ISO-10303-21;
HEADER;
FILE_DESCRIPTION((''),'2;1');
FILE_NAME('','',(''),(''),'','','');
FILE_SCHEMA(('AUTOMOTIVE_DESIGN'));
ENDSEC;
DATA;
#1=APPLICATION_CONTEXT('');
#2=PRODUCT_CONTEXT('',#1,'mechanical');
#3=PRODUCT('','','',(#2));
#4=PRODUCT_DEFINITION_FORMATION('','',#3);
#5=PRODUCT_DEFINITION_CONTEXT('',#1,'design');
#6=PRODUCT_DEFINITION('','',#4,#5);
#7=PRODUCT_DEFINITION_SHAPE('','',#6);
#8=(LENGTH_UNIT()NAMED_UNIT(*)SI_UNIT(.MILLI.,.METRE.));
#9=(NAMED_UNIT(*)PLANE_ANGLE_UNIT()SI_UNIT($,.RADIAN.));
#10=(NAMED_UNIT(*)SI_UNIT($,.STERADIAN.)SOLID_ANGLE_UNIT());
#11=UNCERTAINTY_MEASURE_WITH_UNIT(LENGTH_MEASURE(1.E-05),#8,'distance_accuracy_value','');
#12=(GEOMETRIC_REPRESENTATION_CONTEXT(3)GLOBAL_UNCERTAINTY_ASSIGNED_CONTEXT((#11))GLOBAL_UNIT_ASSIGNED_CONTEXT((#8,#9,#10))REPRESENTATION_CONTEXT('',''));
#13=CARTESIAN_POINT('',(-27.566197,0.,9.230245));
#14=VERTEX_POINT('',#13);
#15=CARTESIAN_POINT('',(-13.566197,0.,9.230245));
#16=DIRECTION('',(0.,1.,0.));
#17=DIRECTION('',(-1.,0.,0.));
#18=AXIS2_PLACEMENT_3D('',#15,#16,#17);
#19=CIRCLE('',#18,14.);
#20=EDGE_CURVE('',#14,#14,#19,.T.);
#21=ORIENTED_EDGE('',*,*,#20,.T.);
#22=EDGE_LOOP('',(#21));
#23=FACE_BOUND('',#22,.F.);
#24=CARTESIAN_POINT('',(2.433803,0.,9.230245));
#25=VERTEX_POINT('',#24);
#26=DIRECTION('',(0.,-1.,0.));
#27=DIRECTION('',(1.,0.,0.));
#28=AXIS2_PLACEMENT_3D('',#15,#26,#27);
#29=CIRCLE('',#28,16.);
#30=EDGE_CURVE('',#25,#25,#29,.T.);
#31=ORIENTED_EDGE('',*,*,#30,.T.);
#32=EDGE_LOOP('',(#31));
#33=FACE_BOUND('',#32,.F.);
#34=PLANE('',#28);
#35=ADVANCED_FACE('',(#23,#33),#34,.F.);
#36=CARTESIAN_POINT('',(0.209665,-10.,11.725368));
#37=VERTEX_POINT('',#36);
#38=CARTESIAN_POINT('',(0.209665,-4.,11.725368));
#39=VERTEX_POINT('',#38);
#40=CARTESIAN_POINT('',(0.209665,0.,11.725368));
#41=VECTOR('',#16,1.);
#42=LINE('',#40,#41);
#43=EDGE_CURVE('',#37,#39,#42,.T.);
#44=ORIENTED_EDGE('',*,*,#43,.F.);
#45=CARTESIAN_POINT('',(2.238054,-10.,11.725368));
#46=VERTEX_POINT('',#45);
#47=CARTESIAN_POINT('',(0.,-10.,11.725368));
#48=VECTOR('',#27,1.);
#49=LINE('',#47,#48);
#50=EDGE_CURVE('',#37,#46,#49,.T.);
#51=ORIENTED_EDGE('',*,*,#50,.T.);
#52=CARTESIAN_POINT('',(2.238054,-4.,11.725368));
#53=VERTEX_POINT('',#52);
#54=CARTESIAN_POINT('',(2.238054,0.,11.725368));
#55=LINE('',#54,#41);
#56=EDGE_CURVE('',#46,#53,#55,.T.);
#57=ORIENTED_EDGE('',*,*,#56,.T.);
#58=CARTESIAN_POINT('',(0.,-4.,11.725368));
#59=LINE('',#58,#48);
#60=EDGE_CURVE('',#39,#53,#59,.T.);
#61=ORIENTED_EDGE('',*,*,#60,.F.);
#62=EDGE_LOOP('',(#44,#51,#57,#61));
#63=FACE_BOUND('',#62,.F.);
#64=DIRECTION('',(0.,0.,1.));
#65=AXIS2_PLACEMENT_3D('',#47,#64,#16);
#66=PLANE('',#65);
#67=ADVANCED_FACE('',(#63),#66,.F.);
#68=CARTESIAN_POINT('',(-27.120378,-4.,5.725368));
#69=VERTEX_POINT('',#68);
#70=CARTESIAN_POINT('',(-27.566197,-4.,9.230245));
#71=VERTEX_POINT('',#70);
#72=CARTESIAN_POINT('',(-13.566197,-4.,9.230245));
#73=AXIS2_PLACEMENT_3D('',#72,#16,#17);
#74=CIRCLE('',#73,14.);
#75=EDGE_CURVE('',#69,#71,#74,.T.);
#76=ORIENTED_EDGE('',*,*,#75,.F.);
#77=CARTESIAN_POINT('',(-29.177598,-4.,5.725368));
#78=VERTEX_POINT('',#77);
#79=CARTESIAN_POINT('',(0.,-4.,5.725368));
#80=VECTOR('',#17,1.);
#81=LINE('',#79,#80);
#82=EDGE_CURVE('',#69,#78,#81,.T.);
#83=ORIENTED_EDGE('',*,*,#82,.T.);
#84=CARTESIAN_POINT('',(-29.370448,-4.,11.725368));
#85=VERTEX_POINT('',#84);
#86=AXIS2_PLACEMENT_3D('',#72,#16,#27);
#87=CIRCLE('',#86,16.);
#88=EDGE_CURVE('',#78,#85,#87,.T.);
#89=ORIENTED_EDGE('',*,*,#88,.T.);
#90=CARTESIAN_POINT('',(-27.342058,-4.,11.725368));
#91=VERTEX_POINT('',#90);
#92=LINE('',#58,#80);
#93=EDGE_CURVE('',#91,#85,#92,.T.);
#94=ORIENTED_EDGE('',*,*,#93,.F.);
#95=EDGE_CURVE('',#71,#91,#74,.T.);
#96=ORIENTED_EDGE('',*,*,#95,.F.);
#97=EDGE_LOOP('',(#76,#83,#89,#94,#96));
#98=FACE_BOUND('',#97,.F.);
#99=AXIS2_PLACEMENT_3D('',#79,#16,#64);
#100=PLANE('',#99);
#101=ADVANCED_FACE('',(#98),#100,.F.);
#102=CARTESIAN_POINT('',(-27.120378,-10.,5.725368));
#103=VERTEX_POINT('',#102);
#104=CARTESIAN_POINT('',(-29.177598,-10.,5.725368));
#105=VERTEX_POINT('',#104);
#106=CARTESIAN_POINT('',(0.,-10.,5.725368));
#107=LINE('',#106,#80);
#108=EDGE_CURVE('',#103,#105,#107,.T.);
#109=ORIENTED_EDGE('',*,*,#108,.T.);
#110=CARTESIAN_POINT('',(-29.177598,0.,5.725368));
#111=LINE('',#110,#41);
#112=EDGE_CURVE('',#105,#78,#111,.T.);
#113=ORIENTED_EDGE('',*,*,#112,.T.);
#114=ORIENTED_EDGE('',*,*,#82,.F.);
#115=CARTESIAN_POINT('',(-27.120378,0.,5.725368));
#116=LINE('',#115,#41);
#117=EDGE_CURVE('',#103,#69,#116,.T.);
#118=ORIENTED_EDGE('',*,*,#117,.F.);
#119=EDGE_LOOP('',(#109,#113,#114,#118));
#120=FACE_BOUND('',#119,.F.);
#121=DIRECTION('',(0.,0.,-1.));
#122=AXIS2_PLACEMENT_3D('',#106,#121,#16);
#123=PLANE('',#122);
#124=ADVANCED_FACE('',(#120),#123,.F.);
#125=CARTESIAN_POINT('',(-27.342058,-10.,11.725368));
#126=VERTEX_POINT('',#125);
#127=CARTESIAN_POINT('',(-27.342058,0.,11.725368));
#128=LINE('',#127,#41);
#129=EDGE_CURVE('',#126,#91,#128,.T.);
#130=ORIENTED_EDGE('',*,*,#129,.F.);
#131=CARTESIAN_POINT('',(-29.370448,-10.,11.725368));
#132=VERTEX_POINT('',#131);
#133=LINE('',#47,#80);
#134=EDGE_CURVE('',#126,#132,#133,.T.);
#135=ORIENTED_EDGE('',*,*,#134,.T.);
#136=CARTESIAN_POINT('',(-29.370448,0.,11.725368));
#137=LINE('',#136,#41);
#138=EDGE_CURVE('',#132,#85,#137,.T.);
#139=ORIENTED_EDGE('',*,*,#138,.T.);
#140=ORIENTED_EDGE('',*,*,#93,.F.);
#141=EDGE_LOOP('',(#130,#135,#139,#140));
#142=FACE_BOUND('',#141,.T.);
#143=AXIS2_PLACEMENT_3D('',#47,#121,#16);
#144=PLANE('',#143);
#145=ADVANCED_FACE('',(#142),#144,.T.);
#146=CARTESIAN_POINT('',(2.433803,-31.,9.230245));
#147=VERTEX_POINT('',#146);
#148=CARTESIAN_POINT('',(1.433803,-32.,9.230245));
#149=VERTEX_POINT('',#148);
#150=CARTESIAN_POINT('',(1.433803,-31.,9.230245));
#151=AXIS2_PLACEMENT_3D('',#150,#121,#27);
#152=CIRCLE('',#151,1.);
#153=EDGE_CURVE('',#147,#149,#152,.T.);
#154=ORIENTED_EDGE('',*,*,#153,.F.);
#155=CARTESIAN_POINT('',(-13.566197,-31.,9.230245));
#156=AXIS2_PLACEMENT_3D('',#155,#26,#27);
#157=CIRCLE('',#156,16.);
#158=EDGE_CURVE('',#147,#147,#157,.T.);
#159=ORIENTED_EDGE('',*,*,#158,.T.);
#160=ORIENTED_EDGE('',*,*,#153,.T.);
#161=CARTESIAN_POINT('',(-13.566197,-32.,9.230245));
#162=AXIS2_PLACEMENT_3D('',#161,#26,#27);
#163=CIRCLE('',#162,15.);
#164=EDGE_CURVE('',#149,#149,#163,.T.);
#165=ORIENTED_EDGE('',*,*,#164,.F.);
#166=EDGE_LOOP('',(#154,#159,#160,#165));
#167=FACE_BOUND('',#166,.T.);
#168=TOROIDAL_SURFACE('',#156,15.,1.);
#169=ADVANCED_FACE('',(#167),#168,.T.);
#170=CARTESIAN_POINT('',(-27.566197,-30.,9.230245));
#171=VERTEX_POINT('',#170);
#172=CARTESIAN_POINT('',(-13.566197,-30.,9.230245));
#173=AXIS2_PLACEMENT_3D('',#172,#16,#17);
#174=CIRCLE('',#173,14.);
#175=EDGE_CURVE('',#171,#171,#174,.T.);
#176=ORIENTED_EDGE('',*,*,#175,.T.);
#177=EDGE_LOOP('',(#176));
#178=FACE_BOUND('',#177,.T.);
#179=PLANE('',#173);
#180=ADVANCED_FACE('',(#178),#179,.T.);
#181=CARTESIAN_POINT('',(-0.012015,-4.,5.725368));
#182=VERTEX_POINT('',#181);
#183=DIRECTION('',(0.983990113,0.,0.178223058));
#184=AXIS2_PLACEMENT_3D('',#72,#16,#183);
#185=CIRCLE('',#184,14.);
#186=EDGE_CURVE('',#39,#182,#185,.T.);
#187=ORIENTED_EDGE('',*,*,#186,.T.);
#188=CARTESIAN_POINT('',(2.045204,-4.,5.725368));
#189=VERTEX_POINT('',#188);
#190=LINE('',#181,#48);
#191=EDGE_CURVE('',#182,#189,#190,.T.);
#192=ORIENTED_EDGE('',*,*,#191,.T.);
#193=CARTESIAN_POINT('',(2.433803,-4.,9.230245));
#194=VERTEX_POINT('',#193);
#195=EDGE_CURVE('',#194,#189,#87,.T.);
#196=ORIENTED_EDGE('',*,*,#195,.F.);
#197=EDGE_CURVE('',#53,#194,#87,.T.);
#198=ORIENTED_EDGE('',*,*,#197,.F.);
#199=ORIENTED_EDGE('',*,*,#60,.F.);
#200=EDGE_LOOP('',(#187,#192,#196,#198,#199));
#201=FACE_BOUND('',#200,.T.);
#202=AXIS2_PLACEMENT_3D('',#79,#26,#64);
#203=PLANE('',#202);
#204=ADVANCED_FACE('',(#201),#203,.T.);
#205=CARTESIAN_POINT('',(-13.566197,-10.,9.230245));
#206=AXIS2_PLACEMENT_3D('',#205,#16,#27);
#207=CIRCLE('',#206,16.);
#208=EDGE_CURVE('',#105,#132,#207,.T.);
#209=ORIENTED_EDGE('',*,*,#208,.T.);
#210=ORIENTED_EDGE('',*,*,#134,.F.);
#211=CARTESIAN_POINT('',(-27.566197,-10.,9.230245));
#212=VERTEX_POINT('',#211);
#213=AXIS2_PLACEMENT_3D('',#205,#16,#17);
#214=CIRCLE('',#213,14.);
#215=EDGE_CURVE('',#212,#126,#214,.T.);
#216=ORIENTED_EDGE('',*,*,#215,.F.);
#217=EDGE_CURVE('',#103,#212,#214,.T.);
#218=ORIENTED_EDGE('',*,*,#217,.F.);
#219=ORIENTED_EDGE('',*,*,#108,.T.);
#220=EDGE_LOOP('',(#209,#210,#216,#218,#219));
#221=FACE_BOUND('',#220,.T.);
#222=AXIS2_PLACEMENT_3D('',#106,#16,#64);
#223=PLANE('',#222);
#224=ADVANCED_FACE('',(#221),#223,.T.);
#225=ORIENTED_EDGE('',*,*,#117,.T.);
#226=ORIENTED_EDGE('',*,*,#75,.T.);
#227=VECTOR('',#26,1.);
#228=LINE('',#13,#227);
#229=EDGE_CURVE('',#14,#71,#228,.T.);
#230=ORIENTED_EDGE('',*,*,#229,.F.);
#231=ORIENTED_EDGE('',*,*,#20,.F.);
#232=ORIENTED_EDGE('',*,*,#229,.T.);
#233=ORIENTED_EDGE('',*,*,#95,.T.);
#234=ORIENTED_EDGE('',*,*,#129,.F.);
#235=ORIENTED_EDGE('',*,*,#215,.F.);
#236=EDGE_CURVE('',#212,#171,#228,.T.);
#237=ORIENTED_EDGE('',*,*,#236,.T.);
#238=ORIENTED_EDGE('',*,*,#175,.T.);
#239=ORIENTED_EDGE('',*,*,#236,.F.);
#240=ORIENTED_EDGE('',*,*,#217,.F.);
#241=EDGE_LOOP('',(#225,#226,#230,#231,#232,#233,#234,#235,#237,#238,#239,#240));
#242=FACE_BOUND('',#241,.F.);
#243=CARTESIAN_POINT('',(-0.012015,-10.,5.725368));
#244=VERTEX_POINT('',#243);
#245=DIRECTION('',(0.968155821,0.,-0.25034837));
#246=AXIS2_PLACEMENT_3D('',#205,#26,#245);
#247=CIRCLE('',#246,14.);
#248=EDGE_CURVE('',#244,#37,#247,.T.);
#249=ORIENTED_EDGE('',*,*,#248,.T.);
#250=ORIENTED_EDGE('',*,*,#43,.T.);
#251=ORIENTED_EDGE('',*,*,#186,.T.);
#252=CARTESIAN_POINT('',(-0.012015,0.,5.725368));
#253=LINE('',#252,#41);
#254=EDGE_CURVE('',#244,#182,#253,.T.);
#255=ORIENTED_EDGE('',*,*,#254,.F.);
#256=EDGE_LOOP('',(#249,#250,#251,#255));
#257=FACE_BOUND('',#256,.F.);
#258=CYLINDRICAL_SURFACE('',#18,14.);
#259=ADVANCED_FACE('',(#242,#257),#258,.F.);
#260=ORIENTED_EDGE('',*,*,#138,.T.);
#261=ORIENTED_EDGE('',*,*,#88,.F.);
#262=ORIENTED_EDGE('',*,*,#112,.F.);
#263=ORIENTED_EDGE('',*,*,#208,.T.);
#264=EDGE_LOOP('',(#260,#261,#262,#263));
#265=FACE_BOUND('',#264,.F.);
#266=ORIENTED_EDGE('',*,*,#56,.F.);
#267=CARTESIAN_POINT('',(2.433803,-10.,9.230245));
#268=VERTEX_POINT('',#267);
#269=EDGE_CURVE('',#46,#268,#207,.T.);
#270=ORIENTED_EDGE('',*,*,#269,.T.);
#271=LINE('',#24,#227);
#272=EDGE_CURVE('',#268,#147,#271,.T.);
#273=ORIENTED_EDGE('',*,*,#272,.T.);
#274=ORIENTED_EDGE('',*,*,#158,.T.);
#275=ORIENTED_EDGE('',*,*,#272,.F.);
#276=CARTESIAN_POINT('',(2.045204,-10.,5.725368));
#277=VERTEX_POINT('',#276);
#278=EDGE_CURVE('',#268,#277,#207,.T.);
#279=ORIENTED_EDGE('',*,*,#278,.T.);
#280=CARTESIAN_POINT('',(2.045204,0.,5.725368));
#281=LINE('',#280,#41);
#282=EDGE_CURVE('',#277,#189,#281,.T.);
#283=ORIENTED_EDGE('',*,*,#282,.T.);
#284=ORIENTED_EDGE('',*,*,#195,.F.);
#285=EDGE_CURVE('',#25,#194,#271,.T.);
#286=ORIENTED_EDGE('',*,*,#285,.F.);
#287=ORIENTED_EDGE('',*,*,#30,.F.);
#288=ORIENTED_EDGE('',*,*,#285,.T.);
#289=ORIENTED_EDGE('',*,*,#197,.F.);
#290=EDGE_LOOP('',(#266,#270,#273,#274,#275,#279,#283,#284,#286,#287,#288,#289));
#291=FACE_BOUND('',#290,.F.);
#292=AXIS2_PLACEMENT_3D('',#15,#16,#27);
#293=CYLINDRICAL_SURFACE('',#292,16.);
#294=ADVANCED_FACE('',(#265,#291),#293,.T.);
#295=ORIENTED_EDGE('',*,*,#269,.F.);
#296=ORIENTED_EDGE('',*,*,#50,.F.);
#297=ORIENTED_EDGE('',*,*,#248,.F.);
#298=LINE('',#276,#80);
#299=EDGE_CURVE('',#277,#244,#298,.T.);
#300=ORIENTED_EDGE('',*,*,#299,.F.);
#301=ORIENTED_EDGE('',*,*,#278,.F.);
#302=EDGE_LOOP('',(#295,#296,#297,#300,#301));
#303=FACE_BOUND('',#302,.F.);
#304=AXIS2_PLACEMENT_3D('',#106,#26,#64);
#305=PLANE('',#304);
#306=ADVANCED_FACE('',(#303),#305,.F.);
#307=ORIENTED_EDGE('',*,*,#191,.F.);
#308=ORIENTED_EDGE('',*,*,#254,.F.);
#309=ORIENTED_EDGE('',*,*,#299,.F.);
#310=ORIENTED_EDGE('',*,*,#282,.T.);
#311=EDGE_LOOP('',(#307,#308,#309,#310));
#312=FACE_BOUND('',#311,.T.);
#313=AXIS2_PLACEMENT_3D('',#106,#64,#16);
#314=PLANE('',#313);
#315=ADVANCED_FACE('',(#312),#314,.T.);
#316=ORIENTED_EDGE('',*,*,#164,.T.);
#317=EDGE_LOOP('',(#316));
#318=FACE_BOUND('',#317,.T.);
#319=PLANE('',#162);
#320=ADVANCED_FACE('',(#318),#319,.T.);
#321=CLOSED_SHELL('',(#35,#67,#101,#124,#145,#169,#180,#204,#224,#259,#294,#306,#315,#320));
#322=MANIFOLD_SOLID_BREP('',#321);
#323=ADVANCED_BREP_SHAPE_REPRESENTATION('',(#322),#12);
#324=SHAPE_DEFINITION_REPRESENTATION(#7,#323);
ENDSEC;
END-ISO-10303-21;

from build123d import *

# Parameters (mm, degrees)
F0_R          = 16
F0_R_2        = 14
F1_DEPTH      = 32
F2_R          = 14
F3_DEPTH      = 30
F4_R          = 1
F5_W          = 6
F5_H          = 6
F6_DEPTH      = 35.5
F6_DEPTH_BACK = 16.5


# Not quite as in the source:
# - a feature names something its author has since deleted; it is built from what else it names


with BuildPart() as f1:
    # F0 (on Front) → F1 (new body)
    with BuildSketch(Plane.XZ):
        with Locations((-13.5661968961, 9.2302449048)):
            Circle(F0_R)
        with Locations((-13.5661968961, 9.2302449048)):
            Circle(F0_R_2, mode=Mode.SUBTRACT)
        with Locations((-13.5661968961, 9.2302449048)):
            Circle(F0_R_2)
    extrude(amount=F1_DEPTH)

    # F2 (on face) → F3 (cut)
    with BuildSketch(Plane(origin=(0, 0, 0), x_dir=(-1, 0, 0), z_dir=(0, 1, 0))):
        with Locations((13.5661968961, 9.2302449048)):
            Circle(F2_R)
    extrude(amount=-F3_DEPTH, mode=Mode.SUBTRACT)

    # F4
    f4_edges = [f1.edges().sort_by_distance(p)[0] for p in [
        (-29.566197, -32, 9.230245),
    ]]
    fillet(f4_edges, radius=F4_R)

    # F5 (on Right) → F6 (cut, two sides)
    with BuildSketch(Plane.YZ) as f6_sk:
        with Locations((-7, 8.7253677193)):
            Rectangle(F5_W, F5_H)
    extrude(amount=-F6_DEPTH, mode=Mode.SUBTRACT)
    extrude(f6_sk.sketch, amount=F6_DEPTH_BACK, mode=Mode.SUBTRACT)


solid = f1.part
